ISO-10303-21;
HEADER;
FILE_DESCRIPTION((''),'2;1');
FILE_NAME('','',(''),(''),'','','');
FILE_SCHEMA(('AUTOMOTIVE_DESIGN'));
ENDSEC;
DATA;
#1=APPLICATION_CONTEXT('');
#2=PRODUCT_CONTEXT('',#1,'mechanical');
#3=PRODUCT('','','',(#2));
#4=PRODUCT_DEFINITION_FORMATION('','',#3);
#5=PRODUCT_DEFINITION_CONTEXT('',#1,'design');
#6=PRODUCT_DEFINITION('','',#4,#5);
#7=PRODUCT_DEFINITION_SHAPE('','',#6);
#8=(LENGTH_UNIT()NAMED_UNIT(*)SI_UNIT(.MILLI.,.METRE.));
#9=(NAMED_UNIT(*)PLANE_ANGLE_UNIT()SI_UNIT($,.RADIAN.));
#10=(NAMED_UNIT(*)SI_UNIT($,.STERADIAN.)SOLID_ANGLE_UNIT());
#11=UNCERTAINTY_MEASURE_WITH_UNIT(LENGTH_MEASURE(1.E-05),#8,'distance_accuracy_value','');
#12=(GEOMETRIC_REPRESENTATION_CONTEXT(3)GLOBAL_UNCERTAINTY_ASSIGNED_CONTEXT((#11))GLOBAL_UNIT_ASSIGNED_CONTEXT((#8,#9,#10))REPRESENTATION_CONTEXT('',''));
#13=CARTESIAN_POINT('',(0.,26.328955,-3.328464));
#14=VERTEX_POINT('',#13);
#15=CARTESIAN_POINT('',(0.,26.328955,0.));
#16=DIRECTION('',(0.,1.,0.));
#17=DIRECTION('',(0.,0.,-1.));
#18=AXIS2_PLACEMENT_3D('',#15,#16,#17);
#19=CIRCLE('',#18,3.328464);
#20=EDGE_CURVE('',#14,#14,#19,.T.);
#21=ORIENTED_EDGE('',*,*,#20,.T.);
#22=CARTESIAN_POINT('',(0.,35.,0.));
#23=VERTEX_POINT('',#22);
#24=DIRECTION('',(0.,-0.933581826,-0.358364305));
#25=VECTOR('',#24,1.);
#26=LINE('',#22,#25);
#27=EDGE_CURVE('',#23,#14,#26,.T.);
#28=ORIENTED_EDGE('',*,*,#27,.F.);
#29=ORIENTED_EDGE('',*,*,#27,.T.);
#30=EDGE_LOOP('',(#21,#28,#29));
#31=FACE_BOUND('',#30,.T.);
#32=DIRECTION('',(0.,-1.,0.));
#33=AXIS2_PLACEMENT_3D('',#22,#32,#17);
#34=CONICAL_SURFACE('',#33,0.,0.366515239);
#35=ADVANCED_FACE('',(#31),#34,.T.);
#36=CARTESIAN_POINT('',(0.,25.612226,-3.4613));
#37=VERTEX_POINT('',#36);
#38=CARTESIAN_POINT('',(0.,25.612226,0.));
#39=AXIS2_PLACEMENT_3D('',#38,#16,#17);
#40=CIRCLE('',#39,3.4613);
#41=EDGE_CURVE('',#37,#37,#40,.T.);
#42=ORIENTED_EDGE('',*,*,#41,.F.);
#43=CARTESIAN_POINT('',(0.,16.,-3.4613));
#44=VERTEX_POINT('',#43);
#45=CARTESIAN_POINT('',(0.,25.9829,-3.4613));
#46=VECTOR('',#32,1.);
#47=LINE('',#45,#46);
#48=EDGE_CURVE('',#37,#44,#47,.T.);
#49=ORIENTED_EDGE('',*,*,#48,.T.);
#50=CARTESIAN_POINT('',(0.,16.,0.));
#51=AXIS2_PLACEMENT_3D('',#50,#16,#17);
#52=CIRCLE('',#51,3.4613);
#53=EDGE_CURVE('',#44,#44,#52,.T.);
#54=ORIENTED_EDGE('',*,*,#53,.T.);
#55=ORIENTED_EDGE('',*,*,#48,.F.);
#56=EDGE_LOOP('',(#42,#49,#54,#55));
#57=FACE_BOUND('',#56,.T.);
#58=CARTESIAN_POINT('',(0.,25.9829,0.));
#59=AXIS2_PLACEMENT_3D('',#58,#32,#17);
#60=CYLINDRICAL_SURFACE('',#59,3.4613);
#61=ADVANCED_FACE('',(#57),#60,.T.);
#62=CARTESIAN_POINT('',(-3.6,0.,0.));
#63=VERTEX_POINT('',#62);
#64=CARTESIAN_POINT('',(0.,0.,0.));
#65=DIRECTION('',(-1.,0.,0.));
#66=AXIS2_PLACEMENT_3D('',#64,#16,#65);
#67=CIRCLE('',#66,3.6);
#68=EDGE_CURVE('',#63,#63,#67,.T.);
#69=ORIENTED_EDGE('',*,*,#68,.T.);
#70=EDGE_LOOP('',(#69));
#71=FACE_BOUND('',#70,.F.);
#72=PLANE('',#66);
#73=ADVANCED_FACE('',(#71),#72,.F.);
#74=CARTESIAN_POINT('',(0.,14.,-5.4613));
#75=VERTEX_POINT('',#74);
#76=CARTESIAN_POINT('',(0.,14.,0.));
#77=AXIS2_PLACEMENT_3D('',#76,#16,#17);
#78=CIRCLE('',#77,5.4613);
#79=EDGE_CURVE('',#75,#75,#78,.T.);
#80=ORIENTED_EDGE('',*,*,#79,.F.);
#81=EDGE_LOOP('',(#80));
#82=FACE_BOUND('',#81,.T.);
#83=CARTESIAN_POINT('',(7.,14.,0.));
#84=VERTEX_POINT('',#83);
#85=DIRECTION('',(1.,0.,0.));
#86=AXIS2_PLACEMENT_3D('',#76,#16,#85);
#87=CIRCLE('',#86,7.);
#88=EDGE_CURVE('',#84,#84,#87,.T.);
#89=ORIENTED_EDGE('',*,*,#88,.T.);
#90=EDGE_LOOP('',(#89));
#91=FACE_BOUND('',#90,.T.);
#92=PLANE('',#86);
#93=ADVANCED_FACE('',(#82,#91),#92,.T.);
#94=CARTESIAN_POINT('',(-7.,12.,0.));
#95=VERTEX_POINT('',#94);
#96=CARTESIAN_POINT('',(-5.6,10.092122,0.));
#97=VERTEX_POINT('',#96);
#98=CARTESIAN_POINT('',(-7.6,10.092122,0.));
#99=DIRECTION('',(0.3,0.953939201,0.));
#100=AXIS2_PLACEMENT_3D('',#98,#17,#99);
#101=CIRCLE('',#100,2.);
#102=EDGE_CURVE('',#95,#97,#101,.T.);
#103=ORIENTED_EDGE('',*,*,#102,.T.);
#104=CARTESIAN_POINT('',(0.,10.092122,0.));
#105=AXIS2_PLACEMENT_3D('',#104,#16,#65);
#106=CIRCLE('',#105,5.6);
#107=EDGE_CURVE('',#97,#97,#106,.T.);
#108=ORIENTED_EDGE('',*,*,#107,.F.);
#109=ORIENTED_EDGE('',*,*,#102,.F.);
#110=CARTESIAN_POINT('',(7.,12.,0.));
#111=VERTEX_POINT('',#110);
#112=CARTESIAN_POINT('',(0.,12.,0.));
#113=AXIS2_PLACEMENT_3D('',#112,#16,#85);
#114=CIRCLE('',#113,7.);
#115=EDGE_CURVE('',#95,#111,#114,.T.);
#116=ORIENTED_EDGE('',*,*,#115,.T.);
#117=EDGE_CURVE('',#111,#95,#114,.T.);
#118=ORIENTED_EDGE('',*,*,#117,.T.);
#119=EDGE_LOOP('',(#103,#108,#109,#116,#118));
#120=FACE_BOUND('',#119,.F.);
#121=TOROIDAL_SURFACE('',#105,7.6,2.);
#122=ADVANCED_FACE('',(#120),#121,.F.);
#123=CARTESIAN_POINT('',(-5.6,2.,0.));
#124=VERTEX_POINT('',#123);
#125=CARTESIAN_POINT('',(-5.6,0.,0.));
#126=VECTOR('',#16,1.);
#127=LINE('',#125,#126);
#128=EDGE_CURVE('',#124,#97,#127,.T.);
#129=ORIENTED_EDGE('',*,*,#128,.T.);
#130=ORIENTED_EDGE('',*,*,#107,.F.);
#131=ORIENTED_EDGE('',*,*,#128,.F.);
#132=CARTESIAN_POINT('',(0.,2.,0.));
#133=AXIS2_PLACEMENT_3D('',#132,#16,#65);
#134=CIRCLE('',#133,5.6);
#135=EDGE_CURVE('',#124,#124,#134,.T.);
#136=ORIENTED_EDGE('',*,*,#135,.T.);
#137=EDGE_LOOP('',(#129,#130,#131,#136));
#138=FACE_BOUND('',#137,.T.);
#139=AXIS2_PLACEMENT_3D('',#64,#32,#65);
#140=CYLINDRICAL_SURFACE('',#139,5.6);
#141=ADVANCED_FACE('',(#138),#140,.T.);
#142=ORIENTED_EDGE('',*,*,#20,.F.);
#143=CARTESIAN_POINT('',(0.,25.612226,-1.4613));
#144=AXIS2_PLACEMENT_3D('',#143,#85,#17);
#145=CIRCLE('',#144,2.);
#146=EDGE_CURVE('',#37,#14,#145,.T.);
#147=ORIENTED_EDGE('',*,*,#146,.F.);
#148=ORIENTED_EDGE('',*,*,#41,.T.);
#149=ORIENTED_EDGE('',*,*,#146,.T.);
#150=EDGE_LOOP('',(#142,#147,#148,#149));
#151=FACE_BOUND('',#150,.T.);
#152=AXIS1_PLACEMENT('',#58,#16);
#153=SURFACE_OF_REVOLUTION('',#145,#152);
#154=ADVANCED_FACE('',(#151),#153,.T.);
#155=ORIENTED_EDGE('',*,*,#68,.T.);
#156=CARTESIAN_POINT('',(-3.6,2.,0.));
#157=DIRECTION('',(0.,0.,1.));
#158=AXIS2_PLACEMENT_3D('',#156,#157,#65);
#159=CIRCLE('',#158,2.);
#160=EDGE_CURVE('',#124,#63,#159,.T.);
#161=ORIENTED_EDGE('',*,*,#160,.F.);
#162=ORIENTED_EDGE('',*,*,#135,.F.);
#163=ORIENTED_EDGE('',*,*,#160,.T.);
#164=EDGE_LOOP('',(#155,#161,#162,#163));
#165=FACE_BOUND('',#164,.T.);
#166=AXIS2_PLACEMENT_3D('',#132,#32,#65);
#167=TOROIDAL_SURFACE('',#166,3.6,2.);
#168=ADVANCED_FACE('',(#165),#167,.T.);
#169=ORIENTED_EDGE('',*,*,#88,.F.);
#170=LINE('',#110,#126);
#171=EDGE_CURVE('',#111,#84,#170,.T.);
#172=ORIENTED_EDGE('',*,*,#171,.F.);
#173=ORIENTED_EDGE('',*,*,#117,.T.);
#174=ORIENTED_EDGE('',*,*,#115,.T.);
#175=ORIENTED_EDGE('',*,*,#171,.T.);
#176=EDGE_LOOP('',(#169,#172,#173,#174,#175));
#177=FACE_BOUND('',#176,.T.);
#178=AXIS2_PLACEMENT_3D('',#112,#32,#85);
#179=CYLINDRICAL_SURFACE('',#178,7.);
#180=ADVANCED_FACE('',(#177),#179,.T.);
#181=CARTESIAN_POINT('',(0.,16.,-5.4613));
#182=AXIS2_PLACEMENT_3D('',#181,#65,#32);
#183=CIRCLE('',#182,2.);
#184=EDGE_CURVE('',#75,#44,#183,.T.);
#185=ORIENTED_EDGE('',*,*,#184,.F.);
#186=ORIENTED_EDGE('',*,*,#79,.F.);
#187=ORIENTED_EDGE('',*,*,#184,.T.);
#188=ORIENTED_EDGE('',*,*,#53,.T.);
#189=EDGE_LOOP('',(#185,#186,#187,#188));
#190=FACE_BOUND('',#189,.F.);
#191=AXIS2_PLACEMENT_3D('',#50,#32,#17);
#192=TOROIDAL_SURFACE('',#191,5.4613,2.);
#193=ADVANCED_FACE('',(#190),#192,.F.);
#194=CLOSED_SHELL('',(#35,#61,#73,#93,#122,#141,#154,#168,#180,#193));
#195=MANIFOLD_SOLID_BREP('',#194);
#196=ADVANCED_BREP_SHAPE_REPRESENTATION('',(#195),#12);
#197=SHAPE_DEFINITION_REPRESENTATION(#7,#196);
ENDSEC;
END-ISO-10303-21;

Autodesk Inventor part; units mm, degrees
ref_plane "YZ Plane" through (0, 0, 0) normal (1, 0, 0) x (0, 1, 0)
ref_plane "XZ Plane" through (0, 0, 0) normal (0, 1, 0) x (-1, 0, 0)
ref_plane "XY Plane" through (0, 0, 0) normal (0, 0, 1) x (1, 0, 0)
sketch "Sketch1" plane through (0, 0, 0) normal (0, 1, 0) x (-1, 0, 0)
  circle A0 centre (0, 0) radius 5.6
  dimension "d0" = 11.2
extrude "Extrusion1" add sketch "Sketch1" along normal blind 12
fillet "Fillet1" radius 2 1 edges at (5.6, 0, 0)
sketch "Sketch2" plane through (0, 12, 0) normal (0, 1, 0) x (1, 0, 0)
  circle A0 centre (0, 0) radius 7
  dimension "d4" = 14
extrude "Extrusion2" add sketch "Sketch2" along normal blind 2
sketch "Sketch3" plane through (0, 0, 0) normal (1, 0, 0) x (0, 1, 0)
  line L0 (14, -7) -> (14, 7) projected
  line L1 (12, -7) -> (12, 7) projected
  line L2 (14, 0) -> (35, 0)
  line L3 (35, 0) -> (25.9829, -3.4613)
  line L4 (25.9829, -3.4613) -> (14, -3.4613)
  point P0 (0, 0)
  dimension "d7" = 21
  dimension "d8" = 21
revolve "Revolution1" add sketch "Sketch3" angle 360 about axis through (0, 14, 0) along (0, 1, 0)
fillet "Fillet2" radius 2 3 edges at (5.6, 12, 0) (0, 14, 3.4613) (0, 25.9829, 3.4613)
properties part number "Punta calibración 2_3DPrint"
